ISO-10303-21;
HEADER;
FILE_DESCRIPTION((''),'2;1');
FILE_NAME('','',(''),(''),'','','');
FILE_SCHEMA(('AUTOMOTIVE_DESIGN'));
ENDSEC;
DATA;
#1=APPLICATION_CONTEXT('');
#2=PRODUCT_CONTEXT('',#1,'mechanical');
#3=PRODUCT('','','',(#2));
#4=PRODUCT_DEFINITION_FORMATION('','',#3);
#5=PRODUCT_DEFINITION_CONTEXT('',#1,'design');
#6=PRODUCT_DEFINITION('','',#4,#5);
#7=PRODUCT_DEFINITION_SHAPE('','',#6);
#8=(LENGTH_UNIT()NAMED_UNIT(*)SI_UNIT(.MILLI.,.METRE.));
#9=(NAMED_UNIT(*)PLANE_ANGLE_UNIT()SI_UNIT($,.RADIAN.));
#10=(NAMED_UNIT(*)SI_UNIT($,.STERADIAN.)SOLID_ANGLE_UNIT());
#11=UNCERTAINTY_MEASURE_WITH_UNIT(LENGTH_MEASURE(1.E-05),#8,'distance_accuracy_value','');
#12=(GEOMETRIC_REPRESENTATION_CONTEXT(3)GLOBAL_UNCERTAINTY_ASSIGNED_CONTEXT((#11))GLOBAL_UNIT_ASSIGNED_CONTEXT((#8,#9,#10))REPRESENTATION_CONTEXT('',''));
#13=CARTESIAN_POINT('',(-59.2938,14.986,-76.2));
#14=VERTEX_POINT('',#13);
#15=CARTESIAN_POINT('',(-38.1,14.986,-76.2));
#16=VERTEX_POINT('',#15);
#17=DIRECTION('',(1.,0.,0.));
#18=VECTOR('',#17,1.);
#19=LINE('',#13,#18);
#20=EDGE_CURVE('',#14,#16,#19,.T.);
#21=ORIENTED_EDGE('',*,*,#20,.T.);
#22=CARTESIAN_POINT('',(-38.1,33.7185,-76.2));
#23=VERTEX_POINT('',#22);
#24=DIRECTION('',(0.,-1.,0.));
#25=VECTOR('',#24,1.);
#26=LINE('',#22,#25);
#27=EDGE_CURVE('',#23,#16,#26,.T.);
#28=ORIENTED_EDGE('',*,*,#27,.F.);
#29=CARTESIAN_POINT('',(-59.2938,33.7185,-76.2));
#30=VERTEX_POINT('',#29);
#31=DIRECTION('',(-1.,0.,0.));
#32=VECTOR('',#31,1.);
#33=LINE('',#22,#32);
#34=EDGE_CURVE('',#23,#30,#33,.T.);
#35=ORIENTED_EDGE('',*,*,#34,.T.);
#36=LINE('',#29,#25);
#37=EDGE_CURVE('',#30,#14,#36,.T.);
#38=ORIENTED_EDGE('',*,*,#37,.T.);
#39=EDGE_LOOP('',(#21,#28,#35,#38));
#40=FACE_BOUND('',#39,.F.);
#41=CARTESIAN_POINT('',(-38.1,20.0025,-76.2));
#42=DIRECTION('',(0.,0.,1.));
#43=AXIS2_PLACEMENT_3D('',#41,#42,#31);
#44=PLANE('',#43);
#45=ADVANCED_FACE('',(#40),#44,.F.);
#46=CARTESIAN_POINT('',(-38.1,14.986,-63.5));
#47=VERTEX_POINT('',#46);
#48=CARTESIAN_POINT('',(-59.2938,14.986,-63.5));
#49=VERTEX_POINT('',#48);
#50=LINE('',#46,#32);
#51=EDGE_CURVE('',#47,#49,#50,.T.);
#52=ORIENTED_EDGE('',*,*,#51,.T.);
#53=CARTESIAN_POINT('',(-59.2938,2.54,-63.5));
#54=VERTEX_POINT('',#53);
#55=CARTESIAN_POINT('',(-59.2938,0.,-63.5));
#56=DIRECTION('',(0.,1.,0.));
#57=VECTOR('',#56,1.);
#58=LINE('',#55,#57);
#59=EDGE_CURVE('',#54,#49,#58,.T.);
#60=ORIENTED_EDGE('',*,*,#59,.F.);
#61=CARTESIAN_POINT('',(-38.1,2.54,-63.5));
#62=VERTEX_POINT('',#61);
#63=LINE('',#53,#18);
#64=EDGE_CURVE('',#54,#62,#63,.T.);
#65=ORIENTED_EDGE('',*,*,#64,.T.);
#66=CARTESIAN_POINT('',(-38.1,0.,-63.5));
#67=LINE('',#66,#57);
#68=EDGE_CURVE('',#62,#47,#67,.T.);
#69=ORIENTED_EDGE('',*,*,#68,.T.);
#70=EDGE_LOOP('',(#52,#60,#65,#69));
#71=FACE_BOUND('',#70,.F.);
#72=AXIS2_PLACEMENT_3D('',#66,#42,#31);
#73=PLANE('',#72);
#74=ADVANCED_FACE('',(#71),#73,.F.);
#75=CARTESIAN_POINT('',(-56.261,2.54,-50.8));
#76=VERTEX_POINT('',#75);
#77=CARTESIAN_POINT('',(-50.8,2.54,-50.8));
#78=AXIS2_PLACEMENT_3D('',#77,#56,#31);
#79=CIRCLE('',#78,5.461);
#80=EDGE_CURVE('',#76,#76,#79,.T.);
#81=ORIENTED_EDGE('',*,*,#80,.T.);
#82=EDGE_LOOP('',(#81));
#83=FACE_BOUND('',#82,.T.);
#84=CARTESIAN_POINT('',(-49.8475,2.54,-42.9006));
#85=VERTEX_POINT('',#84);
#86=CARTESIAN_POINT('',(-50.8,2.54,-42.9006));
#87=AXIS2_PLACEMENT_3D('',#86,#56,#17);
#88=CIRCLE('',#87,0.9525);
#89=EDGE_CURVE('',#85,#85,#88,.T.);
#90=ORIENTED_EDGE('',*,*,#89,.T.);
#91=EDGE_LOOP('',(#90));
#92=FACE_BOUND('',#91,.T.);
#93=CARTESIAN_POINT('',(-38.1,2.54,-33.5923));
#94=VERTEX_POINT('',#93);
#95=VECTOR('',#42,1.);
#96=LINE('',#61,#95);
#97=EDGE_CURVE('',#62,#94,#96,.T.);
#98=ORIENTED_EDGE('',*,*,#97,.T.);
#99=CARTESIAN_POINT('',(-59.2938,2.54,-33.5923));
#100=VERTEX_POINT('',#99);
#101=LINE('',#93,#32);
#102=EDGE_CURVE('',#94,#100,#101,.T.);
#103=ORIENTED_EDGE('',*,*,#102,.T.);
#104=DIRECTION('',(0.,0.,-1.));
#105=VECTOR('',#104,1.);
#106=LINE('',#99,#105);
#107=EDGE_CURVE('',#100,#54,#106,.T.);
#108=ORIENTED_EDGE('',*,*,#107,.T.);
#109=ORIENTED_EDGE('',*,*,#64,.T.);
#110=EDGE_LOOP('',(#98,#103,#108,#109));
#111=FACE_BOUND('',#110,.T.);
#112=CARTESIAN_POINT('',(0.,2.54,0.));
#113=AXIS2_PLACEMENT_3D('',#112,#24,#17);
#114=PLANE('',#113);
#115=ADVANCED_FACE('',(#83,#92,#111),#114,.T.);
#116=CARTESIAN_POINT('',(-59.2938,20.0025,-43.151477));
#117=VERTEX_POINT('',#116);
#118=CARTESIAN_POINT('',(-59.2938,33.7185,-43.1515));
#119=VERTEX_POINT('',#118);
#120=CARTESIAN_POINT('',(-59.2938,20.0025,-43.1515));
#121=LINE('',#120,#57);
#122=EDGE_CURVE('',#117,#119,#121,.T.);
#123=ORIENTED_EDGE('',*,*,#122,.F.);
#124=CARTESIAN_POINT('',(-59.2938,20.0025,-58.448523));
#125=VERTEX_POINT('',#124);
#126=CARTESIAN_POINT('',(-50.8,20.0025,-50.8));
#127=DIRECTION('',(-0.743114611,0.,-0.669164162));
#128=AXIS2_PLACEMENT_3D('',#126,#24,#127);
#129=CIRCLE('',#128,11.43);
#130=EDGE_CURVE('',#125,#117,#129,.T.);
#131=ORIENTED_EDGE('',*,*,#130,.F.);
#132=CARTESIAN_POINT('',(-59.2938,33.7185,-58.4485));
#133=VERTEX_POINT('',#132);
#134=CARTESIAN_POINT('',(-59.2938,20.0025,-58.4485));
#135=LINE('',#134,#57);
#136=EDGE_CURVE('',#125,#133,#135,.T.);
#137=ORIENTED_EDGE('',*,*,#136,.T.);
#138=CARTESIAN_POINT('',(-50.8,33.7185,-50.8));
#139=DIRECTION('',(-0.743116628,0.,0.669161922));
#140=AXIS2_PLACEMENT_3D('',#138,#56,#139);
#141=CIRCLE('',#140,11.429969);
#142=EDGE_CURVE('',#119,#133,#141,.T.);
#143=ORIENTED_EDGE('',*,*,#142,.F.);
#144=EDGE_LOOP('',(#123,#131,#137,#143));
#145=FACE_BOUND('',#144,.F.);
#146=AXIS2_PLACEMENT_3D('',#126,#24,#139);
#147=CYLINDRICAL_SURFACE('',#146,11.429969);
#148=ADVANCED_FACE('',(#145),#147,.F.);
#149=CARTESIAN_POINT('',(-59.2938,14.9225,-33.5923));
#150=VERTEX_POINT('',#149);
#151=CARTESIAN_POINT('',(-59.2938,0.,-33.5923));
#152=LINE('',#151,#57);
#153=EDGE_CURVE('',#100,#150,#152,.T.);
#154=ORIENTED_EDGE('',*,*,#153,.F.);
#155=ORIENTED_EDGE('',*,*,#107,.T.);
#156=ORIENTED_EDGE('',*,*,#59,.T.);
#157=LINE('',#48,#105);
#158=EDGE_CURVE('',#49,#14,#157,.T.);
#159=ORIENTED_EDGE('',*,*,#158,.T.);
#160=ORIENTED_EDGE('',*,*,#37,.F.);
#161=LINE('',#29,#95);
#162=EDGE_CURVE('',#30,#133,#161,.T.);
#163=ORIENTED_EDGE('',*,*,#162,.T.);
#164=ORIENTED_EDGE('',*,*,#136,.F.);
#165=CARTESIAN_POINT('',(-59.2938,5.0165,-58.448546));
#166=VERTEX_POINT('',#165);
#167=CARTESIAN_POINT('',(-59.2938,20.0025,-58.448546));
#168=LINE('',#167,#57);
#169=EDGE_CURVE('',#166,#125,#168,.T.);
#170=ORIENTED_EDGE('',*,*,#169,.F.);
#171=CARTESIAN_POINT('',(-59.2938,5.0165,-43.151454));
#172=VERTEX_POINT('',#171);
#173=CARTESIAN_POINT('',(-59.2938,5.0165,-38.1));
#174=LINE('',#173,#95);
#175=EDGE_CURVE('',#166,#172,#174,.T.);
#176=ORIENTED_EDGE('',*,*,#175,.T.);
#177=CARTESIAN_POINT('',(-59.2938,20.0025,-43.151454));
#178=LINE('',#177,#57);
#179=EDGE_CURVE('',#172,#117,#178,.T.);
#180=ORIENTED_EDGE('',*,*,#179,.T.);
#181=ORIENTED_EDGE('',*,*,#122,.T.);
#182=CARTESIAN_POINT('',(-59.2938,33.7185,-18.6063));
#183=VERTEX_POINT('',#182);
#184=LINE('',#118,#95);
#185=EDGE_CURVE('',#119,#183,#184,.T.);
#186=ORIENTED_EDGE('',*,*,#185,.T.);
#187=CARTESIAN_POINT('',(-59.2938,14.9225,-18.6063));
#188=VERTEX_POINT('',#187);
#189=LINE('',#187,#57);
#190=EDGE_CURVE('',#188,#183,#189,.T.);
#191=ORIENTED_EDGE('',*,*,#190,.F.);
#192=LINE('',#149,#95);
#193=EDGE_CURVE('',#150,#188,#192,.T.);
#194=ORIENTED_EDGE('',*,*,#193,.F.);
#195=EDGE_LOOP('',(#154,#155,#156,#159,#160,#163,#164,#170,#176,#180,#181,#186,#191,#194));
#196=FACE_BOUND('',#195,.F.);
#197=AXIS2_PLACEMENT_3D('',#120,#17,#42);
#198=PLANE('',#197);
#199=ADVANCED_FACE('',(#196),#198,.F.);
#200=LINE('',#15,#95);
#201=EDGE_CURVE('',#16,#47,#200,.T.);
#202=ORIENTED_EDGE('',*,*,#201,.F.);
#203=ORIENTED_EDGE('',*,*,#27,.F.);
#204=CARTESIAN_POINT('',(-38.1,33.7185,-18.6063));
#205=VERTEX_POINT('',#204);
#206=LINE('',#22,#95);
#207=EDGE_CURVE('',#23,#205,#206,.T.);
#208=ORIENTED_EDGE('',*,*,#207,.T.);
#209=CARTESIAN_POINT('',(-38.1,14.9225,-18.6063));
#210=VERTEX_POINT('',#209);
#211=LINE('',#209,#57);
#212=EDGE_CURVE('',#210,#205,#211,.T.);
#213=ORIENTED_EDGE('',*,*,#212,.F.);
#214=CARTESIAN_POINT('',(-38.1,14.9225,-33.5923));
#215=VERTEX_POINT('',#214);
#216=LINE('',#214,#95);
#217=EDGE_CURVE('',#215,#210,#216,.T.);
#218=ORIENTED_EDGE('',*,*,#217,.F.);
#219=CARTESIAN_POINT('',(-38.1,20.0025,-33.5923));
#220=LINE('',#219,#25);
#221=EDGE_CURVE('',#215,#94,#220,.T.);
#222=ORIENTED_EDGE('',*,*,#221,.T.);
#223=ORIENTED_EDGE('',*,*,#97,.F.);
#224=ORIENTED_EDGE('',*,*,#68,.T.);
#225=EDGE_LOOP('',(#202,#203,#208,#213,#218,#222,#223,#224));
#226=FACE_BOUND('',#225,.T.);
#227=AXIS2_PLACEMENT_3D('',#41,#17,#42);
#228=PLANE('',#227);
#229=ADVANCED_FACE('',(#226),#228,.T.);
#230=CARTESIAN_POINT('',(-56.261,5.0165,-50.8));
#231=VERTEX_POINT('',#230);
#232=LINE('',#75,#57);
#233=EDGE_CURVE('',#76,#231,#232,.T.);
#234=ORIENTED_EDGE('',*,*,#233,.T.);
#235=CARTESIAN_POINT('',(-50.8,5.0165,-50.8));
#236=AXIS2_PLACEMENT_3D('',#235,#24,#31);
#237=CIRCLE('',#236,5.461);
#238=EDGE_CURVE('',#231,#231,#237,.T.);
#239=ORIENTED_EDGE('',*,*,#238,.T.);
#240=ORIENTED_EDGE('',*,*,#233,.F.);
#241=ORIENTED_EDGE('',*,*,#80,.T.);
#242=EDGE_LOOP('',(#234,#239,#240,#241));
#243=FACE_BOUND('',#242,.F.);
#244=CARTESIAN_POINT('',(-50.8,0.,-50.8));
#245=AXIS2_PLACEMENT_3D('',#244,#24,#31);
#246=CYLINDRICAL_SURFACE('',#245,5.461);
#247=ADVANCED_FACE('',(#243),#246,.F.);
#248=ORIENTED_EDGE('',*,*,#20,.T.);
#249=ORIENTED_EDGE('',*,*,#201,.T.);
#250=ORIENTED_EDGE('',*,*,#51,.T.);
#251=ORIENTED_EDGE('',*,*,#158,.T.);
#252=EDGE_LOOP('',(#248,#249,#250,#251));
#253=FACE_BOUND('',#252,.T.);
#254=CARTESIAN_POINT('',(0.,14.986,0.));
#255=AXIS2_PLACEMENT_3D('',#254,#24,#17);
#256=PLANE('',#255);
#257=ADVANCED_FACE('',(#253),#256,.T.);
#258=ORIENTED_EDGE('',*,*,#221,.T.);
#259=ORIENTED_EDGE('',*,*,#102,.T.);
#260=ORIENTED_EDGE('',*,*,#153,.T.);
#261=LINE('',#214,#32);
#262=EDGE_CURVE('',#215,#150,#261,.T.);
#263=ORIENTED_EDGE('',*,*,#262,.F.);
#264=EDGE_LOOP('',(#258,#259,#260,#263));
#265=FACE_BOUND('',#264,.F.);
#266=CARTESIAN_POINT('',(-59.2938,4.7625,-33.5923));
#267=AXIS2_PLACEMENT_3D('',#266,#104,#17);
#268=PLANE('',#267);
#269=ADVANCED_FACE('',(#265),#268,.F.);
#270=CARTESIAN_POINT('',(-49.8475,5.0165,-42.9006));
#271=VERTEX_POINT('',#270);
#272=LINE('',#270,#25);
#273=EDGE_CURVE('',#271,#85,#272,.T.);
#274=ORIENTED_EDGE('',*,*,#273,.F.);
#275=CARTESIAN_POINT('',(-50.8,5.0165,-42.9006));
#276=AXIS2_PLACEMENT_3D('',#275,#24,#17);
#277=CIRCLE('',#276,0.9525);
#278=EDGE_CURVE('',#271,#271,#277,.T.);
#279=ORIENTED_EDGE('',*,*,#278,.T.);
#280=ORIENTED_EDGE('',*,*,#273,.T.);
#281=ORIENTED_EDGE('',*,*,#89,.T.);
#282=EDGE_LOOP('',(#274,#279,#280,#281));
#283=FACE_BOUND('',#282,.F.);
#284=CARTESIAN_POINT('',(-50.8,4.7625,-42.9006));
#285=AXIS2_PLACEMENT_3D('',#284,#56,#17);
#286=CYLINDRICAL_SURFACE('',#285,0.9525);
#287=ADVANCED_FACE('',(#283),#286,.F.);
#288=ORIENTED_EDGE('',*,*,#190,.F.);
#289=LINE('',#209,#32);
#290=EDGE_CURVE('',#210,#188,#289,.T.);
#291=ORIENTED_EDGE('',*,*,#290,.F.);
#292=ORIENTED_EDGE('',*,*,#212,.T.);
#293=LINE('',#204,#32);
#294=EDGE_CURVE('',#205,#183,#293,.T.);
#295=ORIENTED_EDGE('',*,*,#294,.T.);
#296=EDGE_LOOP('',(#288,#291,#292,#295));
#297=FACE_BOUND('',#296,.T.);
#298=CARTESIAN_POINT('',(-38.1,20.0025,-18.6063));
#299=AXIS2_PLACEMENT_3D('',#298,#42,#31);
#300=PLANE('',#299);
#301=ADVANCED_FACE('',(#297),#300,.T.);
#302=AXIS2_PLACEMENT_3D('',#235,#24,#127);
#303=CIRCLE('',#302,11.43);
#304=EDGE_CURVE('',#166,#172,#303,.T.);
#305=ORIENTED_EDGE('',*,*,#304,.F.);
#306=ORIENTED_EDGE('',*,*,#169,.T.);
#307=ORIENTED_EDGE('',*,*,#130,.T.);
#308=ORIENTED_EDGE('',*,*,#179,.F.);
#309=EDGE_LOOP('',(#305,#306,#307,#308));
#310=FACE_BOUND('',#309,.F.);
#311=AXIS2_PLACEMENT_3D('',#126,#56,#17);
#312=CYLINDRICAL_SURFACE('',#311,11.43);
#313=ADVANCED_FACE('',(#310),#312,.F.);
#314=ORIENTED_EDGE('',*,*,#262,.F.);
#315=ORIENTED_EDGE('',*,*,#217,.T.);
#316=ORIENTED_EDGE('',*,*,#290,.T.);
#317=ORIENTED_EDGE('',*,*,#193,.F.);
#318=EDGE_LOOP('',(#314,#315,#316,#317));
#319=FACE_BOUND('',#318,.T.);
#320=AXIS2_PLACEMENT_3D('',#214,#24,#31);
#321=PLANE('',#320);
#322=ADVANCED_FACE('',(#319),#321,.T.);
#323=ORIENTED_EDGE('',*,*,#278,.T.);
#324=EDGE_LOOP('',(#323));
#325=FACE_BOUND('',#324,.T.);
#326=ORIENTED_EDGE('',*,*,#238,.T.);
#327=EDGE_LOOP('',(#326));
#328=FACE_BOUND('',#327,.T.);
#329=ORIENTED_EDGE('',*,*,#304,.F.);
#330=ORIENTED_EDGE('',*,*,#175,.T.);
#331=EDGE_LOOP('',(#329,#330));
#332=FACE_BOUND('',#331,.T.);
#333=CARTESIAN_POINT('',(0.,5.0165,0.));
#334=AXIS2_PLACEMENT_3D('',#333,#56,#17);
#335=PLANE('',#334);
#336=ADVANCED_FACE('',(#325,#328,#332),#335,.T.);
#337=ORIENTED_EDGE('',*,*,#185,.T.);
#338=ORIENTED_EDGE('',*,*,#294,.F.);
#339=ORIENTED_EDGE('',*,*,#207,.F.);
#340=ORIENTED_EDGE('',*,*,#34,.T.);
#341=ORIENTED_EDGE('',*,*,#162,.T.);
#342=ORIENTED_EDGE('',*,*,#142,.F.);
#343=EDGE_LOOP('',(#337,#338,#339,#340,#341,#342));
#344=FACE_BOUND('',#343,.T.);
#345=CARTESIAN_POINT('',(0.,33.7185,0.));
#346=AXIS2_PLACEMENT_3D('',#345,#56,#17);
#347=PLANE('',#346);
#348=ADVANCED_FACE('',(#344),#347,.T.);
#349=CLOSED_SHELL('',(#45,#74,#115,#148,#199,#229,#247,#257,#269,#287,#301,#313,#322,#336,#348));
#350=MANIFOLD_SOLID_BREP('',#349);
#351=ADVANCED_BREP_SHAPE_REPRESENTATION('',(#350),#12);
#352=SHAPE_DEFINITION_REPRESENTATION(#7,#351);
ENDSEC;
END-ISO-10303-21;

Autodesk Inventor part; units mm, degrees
ref_plane "YZ Plane" through (0, 0, 0) normal (1, 0, 0) x (0, 1, 0)
ref_plane "XZ Plane" through (0, 0, 0) normal (0, 1, 0) x (-1, 0, 0)
ref_plane "XY Plane" through (0, 0, 0) normal (0, 0, 1) x (1, 0, 0)
sketch "Sketch1" plane through (0, 0, 0) normal (0, 1, 0) x (-1, 0, 0)
  line L0 (0, 0) -> (101.6, 0)
  line L1 (101.6, 0) -> (101.6, -101.6)
  line L2 (101.6, -101.6) -> (0, -101.6)
  line L3 (0, -101.6) -> (0, 0)
  circle A0 centre (50.8, -50.8) radius 5.461
  dimension "d0" = 101.6
  dimension "d1" = 101.6
  dimension "d2" = 10.922
extrude "Extrusion1" add sketch "Sketch1" along normal blind 4.7625
sketch "Sketch2" plane through (0, 4.7625, 0) normal (0, 1, 0) x (1, 0, 0)
  line L0 (-101.6, 0) -> (0, 0) projected
  line L1 (-76.2, 0) -> (0, 0)
  line L2 (0, 0) -> (0, 33.5923)
  line L3 (0, 33.5923) -> (-76.2, 33.5923)
  line L4 (-76.2, 33.5923) -> (-76.2, 0)
  line L5 (-101.6, 101.6) -> (-101.6, 0) projected
  line L6 (0, 0) -> (0, 101.6) projected
  line L7 (0, 101.6) -> (-101.6, 101.6) projected
  line L8 (-101.6, 76.2) -> (0, 76.2)
  line L9 (0, 76.2) -> (0, 101.6)
  line L10 (0, 101.6) -> (-101.6, 101.6)
  line L11 (-101.6, 101.6) -> (-101.6, 76.2)
  circle A0 centre (-50.8, 50.8) radius 5.461 projected
  line L12 (0, 76.2) -> (-38.1, 76.2)
  line L13 (-38.1, 76.2) -> (-38.1, 33.5923)
  line L14 (-38.1, 33.5923) -> (0, 33.5923)
  line L15 (0, 33.5923) -> (0, 76.2)
  point P0 (0, 76.2)
  dimension "d5" = 25.4
  dimension "d6" = 0
  dimension "d9" = 25.4
extrude "Extrusion2" cut sketch "Sketch2" against normal through all contours L4 L3 L2 L0 | L5 L7 L6 L8 | L8 L6 L3 L13
sketch "Sketch3" plane through (0, 4.7625, 0) normal (0, 1, 0) x (1, 0, 0)
  line L0 (-93.6015, 4.7625) -> (-89.5375, 4.7625)
  line L1 (-89.5375, 4.7625) -> (-89.5375, 71.4375)
  line L2 (-89.5375, 71.4375) -> (-93.6015, 71.4375)
  line L3 (-93.6015, 71.4375) -> (-93.6015, 4.7625)
  line L4 (-101.6, 0) -> (-76.2, 0) projected
  line L5 (-101.6, 76.2) -> (-101.6, 0) projected
  line L6 (-38.1, 76.2) -> (-101.6, 76.2) projected
  line L7 (-83.6041, 71.4375) -> (-83.6041, 4.7625)
  line L8 (-79.5401, 71.4375) -> (-83.6041, 71.4375)
  line L9 (-79.5401, 4.7625) -> (-79.5401, 71.4375)
  line L10 (-83.6041, 4.7625) -> (-79.5401, 4.7625)
  line L11 (-73.6067, 71.4375) -> (-73.6067, 4.7625)
  line L12 (-69.5427, 71.4375) -> (-73.6067, 71.4375)
  line L13 (-69.5427, 4.7625) -> (-69.5427, 71.4375)
  line L14 (-73.6067, 4.7625) -> (-69.5427, 4.7625)
  line L15 (-63.6092, 71.4375) -> (-63.6092, 4.7625)
  line L16 (-59.5452, 71.4375) -> (-63.6092, 71.4375)
  line L17 (-59.5452, 4.7625) -> (-59.5452, 71.4375)
  line L18 (-63.6092, 4.7625) -> (-59.5452, 4.7625)
  point P0 (0, 0)
  dimension "d10" = 4.064
  dimension "d11" = 4.7625
  dimension "d12" = 7.9985
  dimension "d14" = 4.7625
  dimension "d17" = 9.9974
extrude "Extrusion3" cut sketch "Sketch3" against normal through all
sketch "Sketch4" plane through (0, 4.7625, 0) normal (0, 1, 0) x (1, 0, 0)
  circle A0 centre (-50.8, 42.9006) radius 0.9525
  circle A1 centre (-50.8, 50.8) radius 5.461 projected
  point P0 (0, 0)
  dimension "d24" = 1.905
  dimension "d25" = 0
  dimension "d26" = 7.8994
extrude "Extrusion4" cut sketch "Sketch4" against normal through all contours A0
sketch "Sketch5" plane through (0, 4.7625, 0) normal (0, 1, 0) x (1, 0, 0)
  line L0 (-101.6, 0) -> (-76.2, 0) projected
  line L1 (-38.1, 76.2) -> (-101.6, 76.2) projected
  line L2 (-101.6, 0) -> (-59.2938, 0)
  line L3 (-59.2938, 0) -> (-59.2938, 76.2)
  line L4 (-59.2938, 76.2) -> (-101.6, 76.2)
  line L5 (-101.6, 76.2) -> (-101.6, 0)
  point P0 (0, 0)
extrude "Extrusion5" cut sketch "Sketch5" against normal through all
sketch "Sketch6" plane through (0, 4.7625, 0) normal (0, 1, 0) x (1, 0, 0)
  circle A0 centre (-50.8, 50.8) radius 5.461 projected
  line L0 (-59.2938, 76.2) -> (-59.2938, 33.5923) projected
  line L1 (-59.2938, 33.5923) -> (-38.1, 33.5923) projected
  line L2 (-38.1, 33.5923) -> (-38.1, 76.2) projected
  line L3 (-38.1, 76.2) -> (-59.2938, 76.2) projected
  circle A1 centre (-50.8, 42.9006) radius 0.9525 projected
  point P0 (0, 0)
extrude "Extrusion6" add sketch "Sketch6" along normal blind 15.24
sketch "Sketch7" plane through (0, 20.0025, 0) normal (0, 1, 0) x (1, 0, 0)
  circle A0 centre (-50.8, 50.8) radius 5.461 projected
  circle A1 centre (-50.8, 50.8) radius 11.43
  point P0 (0, 0)
  dimension "d33" = 22.86
extrude "Extrusion7" cut sketch "Sketch7" against normal blind 14.986
sketch "Sketch10" plane through (0, 0, 0) normal (0, -1, 0) x (1, 0, 0)
  line L0 (-59.2938, -76.2) -> (-38.1, -76.2) projected
  line L1 (-38.1, -76.2) -> (-38.1, -33.5923) projected
  line L2 (-59.2938, -76.2) -> (-38.1, -76.2)
  line L3 (-38.1, -76.2) -> (-38.1, -63.5)
  line L4 (-38.1, -63.5) -> (-59.2938, -63.5)
  line L5 (-59.2938, -63.5) -> (-59.2938, -76.2)
  point P0 (0, 0)
  dimension "d36" = 12.7
extrude "Extrusion8" cut sketch "Sketch10" against normal blind 14.986
sketch "Sketch11" plane through (-59.2938, 0, -33.5923) normal (0, 0, 1) x (1, 0, 0)
  line L0 (21.1938, 20.0025) -> (0, 20.0025) projected
  line L1 (21.1938, 20.0025) -> (21.1938, 14.986) projected
  line L2 (0, 20.0025) -> (21.1938, 20.0025)
  line L3 (21.1938, 20.0025) -> (21.1938, 14.9225)
  line L4 (21.1938, 14.9225) -> (0, 14.9225)
  line L5 (0, 14.9225) -> (0, 20.0025)
  point P0 (59.2938, 0)
  point P1 (21.1938, 14.986)
  dimension "d39" = 5.08
extrude "Extrusion9" add sketch "Sketch11" along normal blind 14.986
sketch "Sketch12" plane through (0, 0, 0) normal (0, -1, 0) x (1, 0, 0)
  line L0 (-59.2938, -63.5) -> (-38.1, -63.5) projected
  line L1 (-38.1, -63.5) -> (-38.1, -33.5923) projected
  line L2 (-38.1, -33.5923) -> (-59.2938, -33.5923) projected
  line L3 (-59.2938, -33.5923) -> (-59.2938, -63.5) projected
  circle A0 centre (-50.8, -42.9006) radius 0.9525 projected
  circle A1 centre (-50.8, -50.8) radius 5.461 projected
  point P0 (0, 0)
extrude "Extrusion10" cut sketch "Sketch12" against normal blind 2.54
sketch "Sketch13" plane through (0, 20.0025, 0) normal (0, 1, 0) x (1, 0, 0)
  arc A0 (-59.2938, 43.1515) -> (-59.2938, 58.4485) centre (-50.8, 50.8) ccw projected
  line L0 (-59.2938, 43.1515) -> (-59.2938, 18.6063) projected
  line L1 (-38.1, 18.6063) -> (-59.2938, 18.6063) projected
  line L2 (-38.1, 76.2) -> (-38.1, 18.6063) projected
  line L3 (-38.1, 76.2) -> (-59.2938, 76.2) projected
  line L4 (-59.2938, 76.2) -> (-59.2938, 58.4485) projected
  point P0 (0, 0)
extrude "Extrusion11" add sketch "Sketch13" along normal blind 13.716
properties part number "rotary encoder mount"
